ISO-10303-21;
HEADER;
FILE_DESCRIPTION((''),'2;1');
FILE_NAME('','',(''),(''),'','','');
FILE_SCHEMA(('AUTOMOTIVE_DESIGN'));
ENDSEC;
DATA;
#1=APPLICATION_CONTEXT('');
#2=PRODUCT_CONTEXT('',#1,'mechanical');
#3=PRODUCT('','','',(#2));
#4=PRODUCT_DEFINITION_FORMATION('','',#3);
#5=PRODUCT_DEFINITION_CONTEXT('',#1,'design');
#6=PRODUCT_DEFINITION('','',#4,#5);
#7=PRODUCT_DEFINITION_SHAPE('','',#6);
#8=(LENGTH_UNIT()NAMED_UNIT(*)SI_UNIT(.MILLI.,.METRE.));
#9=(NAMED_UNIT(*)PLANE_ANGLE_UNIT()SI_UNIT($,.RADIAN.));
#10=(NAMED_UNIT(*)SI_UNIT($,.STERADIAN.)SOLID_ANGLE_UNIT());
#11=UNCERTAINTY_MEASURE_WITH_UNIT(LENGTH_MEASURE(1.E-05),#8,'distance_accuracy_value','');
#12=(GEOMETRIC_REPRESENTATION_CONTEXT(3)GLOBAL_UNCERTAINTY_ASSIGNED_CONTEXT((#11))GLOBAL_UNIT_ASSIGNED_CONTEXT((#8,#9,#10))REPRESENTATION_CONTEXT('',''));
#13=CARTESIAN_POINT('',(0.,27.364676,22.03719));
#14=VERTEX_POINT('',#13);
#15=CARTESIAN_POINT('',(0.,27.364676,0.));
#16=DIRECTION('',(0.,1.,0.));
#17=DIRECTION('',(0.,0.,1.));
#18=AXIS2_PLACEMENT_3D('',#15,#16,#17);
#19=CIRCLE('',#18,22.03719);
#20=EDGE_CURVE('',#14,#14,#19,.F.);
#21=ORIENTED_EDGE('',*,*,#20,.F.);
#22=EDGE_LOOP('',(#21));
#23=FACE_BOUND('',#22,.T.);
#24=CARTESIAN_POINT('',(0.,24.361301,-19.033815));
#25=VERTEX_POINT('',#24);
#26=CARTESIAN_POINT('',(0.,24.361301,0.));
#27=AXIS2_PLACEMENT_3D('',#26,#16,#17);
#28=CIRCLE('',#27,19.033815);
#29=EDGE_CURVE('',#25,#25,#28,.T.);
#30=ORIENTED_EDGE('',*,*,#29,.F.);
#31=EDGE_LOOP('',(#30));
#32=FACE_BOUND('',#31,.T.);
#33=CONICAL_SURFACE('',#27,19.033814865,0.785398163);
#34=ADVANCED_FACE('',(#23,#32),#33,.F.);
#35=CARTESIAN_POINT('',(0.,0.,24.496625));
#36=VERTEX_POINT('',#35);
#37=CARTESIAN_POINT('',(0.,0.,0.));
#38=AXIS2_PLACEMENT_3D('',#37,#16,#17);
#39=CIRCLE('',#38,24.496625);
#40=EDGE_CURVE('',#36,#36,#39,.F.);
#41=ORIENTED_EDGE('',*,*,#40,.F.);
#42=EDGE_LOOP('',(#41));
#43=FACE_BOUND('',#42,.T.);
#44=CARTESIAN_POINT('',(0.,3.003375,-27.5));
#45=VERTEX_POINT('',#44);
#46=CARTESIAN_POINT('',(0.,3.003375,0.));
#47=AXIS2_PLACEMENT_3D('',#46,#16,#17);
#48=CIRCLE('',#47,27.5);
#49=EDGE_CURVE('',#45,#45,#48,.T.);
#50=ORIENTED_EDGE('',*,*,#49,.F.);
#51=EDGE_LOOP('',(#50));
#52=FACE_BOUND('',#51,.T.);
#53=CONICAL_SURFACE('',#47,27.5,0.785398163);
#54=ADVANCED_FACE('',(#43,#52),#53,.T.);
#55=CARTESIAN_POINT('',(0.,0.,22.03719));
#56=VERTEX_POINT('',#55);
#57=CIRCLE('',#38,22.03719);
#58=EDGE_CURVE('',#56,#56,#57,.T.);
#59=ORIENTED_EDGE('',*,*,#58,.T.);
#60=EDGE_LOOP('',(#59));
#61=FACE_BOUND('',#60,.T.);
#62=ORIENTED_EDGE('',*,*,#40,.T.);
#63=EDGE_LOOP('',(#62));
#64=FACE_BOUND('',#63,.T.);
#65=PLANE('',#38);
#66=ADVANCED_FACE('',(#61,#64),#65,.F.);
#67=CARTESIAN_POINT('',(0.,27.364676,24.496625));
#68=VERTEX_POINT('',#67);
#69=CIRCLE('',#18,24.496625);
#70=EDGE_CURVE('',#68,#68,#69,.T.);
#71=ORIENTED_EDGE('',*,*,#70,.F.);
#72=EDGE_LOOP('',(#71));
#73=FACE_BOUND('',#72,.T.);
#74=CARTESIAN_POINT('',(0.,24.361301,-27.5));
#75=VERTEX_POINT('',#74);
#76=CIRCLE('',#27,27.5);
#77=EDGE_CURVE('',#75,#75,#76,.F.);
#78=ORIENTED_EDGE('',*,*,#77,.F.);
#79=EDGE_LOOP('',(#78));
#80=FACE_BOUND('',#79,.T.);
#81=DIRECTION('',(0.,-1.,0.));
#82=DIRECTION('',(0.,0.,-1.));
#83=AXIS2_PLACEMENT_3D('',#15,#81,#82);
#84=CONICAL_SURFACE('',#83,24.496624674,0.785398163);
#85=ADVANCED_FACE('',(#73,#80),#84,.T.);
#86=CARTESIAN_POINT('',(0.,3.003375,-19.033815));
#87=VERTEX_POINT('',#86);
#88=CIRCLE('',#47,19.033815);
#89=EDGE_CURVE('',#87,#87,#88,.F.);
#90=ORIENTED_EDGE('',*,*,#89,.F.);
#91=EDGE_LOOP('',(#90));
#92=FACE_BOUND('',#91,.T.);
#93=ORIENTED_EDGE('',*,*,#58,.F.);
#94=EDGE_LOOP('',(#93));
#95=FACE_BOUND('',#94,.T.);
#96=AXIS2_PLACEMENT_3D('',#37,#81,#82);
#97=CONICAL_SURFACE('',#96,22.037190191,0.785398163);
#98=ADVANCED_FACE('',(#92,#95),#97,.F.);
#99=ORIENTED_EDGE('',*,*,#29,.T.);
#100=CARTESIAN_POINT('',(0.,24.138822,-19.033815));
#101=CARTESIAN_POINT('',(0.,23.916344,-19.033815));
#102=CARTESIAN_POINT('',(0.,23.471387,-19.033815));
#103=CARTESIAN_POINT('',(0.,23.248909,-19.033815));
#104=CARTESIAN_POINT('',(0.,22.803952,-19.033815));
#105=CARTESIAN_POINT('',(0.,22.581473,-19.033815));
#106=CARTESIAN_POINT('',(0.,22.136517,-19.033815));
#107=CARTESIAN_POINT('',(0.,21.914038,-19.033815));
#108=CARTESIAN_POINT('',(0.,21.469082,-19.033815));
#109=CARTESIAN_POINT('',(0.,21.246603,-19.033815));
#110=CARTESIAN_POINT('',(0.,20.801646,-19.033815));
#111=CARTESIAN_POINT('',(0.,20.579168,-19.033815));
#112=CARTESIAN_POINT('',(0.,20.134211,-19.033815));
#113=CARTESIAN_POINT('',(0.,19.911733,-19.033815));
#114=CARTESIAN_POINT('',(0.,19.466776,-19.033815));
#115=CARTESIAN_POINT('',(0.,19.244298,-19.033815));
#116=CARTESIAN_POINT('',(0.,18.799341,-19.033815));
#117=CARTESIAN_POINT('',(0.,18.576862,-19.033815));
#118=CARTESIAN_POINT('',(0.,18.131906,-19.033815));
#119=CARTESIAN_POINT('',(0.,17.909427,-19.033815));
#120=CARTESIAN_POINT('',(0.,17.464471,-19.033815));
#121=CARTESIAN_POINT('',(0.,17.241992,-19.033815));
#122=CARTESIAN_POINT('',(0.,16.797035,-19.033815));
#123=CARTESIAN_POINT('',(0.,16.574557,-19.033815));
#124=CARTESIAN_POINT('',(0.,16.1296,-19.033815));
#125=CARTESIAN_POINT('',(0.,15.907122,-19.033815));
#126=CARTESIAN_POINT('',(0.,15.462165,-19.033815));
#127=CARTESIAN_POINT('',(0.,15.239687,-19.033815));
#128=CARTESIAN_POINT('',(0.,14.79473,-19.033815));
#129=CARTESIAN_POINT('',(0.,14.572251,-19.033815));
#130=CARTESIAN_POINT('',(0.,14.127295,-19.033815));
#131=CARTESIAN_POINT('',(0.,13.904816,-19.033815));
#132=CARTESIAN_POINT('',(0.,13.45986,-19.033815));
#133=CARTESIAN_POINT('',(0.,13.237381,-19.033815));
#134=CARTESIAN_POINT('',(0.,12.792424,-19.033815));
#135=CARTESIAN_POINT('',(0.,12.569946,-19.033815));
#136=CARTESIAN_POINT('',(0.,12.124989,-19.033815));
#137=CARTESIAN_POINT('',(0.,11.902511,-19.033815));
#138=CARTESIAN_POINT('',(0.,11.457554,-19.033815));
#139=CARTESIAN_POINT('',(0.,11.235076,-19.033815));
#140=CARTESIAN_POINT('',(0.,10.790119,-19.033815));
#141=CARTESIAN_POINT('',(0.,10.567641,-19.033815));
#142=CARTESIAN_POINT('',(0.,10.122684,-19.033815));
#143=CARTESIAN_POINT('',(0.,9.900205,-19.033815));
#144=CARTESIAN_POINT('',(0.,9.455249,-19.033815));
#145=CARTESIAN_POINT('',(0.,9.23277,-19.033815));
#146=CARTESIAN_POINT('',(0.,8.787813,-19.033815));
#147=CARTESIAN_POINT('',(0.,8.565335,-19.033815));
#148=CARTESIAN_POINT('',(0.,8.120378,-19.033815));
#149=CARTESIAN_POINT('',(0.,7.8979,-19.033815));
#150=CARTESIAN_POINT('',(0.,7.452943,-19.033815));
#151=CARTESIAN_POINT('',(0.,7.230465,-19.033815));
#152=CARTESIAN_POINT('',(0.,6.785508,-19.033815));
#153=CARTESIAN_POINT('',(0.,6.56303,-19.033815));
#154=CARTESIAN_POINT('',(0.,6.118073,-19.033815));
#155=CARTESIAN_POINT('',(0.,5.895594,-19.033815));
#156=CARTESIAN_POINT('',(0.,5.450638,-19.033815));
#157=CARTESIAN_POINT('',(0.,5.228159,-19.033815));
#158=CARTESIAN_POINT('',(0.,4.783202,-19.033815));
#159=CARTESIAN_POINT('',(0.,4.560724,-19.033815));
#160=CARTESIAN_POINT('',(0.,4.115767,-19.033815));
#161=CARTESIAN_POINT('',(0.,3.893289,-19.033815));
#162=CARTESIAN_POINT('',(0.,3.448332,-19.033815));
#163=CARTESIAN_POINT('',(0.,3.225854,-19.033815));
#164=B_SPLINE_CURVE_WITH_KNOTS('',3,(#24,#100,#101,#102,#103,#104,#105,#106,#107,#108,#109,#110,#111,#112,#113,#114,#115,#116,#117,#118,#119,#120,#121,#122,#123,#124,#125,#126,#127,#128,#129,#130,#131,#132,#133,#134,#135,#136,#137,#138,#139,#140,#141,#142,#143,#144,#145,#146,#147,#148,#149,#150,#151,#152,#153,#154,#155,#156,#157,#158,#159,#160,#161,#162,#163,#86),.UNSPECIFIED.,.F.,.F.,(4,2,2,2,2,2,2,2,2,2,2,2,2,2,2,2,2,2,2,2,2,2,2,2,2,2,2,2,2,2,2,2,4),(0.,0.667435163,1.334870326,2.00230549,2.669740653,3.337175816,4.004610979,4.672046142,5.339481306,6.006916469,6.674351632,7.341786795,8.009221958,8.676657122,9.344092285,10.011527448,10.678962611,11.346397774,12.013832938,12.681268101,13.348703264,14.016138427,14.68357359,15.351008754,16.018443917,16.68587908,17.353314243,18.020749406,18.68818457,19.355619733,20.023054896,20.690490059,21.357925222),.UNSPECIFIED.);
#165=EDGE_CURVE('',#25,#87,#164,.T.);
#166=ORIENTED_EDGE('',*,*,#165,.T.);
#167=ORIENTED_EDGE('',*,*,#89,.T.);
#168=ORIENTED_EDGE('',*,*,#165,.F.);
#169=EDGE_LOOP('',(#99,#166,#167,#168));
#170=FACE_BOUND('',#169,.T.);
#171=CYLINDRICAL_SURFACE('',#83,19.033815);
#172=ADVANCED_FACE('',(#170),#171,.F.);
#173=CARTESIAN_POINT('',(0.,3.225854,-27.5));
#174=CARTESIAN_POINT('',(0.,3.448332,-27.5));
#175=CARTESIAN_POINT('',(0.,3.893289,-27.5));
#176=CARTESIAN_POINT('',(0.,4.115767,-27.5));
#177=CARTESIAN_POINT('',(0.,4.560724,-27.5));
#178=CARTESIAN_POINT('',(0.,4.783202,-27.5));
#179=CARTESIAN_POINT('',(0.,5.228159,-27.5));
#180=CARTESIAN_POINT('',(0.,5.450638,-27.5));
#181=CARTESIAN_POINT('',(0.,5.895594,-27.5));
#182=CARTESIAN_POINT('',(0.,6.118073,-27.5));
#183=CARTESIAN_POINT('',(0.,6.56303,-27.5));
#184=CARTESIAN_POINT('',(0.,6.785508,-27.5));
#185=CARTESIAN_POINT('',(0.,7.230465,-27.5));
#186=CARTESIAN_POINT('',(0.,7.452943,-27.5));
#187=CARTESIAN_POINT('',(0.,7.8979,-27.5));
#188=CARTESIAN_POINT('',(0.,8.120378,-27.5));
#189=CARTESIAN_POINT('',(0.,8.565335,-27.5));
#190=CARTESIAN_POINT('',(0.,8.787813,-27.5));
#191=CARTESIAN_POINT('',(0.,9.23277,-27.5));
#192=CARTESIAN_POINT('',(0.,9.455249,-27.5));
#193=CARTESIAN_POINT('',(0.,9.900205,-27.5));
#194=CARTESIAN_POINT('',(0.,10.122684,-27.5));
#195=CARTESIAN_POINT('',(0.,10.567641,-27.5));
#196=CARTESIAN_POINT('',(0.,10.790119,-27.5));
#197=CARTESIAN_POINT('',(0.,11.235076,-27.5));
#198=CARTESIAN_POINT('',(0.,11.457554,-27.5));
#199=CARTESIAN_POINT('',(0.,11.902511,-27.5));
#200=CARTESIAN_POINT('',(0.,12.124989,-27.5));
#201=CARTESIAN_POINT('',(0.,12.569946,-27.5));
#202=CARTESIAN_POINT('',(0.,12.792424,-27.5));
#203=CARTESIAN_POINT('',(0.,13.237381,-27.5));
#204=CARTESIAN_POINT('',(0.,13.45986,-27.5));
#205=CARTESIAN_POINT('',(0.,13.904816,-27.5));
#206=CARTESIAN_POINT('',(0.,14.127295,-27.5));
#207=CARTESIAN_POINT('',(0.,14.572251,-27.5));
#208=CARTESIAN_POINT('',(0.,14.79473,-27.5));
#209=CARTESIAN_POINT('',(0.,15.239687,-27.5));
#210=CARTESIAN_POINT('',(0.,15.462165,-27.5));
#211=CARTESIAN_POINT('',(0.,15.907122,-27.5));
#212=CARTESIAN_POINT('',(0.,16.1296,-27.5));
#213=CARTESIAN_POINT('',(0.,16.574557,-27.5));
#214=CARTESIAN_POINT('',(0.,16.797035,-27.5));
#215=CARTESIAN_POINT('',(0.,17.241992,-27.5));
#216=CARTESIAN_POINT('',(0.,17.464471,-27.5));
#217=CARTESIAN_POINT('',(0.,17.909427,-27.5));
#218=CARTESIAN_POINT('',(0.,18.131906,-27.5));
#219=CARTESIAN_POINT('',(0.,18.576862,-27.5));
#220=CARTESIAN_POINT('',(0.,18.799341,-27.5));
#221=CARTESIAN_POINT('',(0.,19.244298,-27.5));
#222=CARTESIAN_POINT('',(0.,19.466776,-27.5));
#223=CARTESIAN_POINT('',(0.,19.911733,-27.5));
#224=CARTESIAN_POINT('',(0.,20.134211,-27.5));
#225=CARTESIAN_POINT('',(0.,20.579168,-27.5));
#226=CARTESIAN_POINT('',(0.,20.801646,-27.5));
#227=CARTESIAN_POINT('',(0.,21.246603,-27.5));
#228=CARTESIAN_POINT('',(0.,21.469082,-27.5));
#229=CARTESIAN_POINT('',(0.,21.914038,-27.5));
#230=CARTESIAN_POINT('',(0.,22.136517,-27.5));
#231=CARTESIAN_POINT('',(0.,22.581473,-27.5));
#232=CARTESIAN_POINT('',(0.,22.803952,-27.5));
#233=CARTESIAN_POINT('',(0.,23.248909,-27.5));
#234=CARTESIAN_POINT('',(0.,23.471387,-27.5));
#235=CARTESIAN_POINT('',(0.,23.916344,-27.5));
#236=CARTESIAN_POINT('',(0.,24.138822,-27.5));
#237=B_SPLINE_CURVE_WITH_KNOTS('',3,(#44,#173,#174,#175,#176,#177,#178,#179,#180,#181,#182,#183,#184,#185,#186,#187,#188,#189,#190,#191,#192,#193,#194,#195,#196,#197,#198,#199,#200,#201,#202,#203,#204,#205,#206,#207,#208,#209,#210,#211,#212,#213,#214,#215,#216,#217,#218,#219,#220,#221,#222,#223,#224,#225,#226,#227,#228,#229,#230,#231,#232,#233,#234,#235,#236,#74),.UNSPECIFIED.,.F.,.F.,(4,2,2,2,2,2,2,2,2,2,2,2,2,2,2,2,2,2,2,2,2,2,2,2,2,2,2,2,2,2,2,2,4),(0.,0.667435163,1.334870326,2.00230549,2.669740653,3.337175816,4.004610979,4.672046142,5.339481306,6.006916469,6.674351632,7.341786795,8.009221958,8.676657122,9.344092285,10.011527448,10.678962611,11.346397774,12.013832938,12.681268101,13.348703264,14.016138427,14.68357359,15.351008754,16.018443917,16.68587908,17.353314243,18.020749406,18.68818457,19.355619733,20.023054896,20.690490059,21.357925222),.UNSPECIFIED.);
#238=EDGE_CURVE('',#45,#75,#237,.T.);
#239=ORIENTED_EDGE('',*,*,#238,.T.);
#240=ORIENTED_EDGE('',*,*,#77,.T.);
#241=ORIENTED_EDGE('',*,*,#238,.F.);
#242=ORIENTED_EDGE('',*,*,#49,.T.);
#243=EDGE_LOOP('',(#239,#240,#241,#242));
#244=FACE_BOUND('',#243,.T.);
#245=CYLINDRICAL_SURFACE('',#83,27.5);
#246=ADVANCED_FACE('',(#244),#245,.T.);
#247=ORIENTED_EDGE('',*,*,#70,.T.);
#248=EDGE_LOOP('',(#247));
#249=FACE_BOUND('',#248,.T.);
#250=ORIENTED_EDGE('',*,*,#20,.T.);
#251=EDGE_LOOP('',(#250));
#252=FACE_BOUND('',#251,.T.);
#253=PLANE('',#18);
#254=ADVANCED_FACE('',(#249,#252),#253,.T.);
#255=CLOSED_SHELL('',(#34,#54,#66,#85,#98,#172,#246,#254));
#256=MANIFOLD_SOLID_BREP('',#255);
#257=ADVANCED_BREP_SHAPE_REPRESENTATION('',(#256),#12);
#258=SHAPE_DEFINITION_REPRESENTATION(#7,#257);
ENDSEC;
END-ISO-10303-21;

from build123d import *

# Parameters (mm, degrees)
SKETCH1_R           = 27.5
BOSS_EXTRUDE1_DEPTH = 27.364675875
SKETCH2_R           = 19.033814865
CUT_EXTRUDE1_DEPTH  = 48.553396154
CHAMFER1_SIZE       = 3.003375326


with BuildPart() as part:
    # Sketch1 → Boss-Extrude1 (new body)
    with BuildSketch(Plane(origin=(0, 0, 0), x_dir=(1, 0, 0), z_dir=(0, 1, 0))):
        Circle(SKETCH1_R)
    extrude(amount=BOSS_EXTRUDE1_DEPTH)

    # Sketch2 → Cut-Extrude1 (cut, through all)
    with BuildSketch(Plane(origin=(0, 0, 0), x_dir=(1, 0, 0), z_dir=(0, 1, 0))):
        Circle(SKETCH2_R)
    extrude(amount=CUT_EXTRUDE1_DEPTH, mode=Mode.SUBTRACT)

    # Chamfer1
    chamfer1_edges = [part.edges().sort_by_distance(p)[0] for p in [
        (-19.033814865, 27.364675875, 0),
        (-19.033814865, 0, 0),
        (-27.5, 0, 0),
        (-27.5, 27.364675875, 0),
    ]]
    chamfer(chamfer1_edges, length=CHAMFER1_SIZE)


solid = part.part
